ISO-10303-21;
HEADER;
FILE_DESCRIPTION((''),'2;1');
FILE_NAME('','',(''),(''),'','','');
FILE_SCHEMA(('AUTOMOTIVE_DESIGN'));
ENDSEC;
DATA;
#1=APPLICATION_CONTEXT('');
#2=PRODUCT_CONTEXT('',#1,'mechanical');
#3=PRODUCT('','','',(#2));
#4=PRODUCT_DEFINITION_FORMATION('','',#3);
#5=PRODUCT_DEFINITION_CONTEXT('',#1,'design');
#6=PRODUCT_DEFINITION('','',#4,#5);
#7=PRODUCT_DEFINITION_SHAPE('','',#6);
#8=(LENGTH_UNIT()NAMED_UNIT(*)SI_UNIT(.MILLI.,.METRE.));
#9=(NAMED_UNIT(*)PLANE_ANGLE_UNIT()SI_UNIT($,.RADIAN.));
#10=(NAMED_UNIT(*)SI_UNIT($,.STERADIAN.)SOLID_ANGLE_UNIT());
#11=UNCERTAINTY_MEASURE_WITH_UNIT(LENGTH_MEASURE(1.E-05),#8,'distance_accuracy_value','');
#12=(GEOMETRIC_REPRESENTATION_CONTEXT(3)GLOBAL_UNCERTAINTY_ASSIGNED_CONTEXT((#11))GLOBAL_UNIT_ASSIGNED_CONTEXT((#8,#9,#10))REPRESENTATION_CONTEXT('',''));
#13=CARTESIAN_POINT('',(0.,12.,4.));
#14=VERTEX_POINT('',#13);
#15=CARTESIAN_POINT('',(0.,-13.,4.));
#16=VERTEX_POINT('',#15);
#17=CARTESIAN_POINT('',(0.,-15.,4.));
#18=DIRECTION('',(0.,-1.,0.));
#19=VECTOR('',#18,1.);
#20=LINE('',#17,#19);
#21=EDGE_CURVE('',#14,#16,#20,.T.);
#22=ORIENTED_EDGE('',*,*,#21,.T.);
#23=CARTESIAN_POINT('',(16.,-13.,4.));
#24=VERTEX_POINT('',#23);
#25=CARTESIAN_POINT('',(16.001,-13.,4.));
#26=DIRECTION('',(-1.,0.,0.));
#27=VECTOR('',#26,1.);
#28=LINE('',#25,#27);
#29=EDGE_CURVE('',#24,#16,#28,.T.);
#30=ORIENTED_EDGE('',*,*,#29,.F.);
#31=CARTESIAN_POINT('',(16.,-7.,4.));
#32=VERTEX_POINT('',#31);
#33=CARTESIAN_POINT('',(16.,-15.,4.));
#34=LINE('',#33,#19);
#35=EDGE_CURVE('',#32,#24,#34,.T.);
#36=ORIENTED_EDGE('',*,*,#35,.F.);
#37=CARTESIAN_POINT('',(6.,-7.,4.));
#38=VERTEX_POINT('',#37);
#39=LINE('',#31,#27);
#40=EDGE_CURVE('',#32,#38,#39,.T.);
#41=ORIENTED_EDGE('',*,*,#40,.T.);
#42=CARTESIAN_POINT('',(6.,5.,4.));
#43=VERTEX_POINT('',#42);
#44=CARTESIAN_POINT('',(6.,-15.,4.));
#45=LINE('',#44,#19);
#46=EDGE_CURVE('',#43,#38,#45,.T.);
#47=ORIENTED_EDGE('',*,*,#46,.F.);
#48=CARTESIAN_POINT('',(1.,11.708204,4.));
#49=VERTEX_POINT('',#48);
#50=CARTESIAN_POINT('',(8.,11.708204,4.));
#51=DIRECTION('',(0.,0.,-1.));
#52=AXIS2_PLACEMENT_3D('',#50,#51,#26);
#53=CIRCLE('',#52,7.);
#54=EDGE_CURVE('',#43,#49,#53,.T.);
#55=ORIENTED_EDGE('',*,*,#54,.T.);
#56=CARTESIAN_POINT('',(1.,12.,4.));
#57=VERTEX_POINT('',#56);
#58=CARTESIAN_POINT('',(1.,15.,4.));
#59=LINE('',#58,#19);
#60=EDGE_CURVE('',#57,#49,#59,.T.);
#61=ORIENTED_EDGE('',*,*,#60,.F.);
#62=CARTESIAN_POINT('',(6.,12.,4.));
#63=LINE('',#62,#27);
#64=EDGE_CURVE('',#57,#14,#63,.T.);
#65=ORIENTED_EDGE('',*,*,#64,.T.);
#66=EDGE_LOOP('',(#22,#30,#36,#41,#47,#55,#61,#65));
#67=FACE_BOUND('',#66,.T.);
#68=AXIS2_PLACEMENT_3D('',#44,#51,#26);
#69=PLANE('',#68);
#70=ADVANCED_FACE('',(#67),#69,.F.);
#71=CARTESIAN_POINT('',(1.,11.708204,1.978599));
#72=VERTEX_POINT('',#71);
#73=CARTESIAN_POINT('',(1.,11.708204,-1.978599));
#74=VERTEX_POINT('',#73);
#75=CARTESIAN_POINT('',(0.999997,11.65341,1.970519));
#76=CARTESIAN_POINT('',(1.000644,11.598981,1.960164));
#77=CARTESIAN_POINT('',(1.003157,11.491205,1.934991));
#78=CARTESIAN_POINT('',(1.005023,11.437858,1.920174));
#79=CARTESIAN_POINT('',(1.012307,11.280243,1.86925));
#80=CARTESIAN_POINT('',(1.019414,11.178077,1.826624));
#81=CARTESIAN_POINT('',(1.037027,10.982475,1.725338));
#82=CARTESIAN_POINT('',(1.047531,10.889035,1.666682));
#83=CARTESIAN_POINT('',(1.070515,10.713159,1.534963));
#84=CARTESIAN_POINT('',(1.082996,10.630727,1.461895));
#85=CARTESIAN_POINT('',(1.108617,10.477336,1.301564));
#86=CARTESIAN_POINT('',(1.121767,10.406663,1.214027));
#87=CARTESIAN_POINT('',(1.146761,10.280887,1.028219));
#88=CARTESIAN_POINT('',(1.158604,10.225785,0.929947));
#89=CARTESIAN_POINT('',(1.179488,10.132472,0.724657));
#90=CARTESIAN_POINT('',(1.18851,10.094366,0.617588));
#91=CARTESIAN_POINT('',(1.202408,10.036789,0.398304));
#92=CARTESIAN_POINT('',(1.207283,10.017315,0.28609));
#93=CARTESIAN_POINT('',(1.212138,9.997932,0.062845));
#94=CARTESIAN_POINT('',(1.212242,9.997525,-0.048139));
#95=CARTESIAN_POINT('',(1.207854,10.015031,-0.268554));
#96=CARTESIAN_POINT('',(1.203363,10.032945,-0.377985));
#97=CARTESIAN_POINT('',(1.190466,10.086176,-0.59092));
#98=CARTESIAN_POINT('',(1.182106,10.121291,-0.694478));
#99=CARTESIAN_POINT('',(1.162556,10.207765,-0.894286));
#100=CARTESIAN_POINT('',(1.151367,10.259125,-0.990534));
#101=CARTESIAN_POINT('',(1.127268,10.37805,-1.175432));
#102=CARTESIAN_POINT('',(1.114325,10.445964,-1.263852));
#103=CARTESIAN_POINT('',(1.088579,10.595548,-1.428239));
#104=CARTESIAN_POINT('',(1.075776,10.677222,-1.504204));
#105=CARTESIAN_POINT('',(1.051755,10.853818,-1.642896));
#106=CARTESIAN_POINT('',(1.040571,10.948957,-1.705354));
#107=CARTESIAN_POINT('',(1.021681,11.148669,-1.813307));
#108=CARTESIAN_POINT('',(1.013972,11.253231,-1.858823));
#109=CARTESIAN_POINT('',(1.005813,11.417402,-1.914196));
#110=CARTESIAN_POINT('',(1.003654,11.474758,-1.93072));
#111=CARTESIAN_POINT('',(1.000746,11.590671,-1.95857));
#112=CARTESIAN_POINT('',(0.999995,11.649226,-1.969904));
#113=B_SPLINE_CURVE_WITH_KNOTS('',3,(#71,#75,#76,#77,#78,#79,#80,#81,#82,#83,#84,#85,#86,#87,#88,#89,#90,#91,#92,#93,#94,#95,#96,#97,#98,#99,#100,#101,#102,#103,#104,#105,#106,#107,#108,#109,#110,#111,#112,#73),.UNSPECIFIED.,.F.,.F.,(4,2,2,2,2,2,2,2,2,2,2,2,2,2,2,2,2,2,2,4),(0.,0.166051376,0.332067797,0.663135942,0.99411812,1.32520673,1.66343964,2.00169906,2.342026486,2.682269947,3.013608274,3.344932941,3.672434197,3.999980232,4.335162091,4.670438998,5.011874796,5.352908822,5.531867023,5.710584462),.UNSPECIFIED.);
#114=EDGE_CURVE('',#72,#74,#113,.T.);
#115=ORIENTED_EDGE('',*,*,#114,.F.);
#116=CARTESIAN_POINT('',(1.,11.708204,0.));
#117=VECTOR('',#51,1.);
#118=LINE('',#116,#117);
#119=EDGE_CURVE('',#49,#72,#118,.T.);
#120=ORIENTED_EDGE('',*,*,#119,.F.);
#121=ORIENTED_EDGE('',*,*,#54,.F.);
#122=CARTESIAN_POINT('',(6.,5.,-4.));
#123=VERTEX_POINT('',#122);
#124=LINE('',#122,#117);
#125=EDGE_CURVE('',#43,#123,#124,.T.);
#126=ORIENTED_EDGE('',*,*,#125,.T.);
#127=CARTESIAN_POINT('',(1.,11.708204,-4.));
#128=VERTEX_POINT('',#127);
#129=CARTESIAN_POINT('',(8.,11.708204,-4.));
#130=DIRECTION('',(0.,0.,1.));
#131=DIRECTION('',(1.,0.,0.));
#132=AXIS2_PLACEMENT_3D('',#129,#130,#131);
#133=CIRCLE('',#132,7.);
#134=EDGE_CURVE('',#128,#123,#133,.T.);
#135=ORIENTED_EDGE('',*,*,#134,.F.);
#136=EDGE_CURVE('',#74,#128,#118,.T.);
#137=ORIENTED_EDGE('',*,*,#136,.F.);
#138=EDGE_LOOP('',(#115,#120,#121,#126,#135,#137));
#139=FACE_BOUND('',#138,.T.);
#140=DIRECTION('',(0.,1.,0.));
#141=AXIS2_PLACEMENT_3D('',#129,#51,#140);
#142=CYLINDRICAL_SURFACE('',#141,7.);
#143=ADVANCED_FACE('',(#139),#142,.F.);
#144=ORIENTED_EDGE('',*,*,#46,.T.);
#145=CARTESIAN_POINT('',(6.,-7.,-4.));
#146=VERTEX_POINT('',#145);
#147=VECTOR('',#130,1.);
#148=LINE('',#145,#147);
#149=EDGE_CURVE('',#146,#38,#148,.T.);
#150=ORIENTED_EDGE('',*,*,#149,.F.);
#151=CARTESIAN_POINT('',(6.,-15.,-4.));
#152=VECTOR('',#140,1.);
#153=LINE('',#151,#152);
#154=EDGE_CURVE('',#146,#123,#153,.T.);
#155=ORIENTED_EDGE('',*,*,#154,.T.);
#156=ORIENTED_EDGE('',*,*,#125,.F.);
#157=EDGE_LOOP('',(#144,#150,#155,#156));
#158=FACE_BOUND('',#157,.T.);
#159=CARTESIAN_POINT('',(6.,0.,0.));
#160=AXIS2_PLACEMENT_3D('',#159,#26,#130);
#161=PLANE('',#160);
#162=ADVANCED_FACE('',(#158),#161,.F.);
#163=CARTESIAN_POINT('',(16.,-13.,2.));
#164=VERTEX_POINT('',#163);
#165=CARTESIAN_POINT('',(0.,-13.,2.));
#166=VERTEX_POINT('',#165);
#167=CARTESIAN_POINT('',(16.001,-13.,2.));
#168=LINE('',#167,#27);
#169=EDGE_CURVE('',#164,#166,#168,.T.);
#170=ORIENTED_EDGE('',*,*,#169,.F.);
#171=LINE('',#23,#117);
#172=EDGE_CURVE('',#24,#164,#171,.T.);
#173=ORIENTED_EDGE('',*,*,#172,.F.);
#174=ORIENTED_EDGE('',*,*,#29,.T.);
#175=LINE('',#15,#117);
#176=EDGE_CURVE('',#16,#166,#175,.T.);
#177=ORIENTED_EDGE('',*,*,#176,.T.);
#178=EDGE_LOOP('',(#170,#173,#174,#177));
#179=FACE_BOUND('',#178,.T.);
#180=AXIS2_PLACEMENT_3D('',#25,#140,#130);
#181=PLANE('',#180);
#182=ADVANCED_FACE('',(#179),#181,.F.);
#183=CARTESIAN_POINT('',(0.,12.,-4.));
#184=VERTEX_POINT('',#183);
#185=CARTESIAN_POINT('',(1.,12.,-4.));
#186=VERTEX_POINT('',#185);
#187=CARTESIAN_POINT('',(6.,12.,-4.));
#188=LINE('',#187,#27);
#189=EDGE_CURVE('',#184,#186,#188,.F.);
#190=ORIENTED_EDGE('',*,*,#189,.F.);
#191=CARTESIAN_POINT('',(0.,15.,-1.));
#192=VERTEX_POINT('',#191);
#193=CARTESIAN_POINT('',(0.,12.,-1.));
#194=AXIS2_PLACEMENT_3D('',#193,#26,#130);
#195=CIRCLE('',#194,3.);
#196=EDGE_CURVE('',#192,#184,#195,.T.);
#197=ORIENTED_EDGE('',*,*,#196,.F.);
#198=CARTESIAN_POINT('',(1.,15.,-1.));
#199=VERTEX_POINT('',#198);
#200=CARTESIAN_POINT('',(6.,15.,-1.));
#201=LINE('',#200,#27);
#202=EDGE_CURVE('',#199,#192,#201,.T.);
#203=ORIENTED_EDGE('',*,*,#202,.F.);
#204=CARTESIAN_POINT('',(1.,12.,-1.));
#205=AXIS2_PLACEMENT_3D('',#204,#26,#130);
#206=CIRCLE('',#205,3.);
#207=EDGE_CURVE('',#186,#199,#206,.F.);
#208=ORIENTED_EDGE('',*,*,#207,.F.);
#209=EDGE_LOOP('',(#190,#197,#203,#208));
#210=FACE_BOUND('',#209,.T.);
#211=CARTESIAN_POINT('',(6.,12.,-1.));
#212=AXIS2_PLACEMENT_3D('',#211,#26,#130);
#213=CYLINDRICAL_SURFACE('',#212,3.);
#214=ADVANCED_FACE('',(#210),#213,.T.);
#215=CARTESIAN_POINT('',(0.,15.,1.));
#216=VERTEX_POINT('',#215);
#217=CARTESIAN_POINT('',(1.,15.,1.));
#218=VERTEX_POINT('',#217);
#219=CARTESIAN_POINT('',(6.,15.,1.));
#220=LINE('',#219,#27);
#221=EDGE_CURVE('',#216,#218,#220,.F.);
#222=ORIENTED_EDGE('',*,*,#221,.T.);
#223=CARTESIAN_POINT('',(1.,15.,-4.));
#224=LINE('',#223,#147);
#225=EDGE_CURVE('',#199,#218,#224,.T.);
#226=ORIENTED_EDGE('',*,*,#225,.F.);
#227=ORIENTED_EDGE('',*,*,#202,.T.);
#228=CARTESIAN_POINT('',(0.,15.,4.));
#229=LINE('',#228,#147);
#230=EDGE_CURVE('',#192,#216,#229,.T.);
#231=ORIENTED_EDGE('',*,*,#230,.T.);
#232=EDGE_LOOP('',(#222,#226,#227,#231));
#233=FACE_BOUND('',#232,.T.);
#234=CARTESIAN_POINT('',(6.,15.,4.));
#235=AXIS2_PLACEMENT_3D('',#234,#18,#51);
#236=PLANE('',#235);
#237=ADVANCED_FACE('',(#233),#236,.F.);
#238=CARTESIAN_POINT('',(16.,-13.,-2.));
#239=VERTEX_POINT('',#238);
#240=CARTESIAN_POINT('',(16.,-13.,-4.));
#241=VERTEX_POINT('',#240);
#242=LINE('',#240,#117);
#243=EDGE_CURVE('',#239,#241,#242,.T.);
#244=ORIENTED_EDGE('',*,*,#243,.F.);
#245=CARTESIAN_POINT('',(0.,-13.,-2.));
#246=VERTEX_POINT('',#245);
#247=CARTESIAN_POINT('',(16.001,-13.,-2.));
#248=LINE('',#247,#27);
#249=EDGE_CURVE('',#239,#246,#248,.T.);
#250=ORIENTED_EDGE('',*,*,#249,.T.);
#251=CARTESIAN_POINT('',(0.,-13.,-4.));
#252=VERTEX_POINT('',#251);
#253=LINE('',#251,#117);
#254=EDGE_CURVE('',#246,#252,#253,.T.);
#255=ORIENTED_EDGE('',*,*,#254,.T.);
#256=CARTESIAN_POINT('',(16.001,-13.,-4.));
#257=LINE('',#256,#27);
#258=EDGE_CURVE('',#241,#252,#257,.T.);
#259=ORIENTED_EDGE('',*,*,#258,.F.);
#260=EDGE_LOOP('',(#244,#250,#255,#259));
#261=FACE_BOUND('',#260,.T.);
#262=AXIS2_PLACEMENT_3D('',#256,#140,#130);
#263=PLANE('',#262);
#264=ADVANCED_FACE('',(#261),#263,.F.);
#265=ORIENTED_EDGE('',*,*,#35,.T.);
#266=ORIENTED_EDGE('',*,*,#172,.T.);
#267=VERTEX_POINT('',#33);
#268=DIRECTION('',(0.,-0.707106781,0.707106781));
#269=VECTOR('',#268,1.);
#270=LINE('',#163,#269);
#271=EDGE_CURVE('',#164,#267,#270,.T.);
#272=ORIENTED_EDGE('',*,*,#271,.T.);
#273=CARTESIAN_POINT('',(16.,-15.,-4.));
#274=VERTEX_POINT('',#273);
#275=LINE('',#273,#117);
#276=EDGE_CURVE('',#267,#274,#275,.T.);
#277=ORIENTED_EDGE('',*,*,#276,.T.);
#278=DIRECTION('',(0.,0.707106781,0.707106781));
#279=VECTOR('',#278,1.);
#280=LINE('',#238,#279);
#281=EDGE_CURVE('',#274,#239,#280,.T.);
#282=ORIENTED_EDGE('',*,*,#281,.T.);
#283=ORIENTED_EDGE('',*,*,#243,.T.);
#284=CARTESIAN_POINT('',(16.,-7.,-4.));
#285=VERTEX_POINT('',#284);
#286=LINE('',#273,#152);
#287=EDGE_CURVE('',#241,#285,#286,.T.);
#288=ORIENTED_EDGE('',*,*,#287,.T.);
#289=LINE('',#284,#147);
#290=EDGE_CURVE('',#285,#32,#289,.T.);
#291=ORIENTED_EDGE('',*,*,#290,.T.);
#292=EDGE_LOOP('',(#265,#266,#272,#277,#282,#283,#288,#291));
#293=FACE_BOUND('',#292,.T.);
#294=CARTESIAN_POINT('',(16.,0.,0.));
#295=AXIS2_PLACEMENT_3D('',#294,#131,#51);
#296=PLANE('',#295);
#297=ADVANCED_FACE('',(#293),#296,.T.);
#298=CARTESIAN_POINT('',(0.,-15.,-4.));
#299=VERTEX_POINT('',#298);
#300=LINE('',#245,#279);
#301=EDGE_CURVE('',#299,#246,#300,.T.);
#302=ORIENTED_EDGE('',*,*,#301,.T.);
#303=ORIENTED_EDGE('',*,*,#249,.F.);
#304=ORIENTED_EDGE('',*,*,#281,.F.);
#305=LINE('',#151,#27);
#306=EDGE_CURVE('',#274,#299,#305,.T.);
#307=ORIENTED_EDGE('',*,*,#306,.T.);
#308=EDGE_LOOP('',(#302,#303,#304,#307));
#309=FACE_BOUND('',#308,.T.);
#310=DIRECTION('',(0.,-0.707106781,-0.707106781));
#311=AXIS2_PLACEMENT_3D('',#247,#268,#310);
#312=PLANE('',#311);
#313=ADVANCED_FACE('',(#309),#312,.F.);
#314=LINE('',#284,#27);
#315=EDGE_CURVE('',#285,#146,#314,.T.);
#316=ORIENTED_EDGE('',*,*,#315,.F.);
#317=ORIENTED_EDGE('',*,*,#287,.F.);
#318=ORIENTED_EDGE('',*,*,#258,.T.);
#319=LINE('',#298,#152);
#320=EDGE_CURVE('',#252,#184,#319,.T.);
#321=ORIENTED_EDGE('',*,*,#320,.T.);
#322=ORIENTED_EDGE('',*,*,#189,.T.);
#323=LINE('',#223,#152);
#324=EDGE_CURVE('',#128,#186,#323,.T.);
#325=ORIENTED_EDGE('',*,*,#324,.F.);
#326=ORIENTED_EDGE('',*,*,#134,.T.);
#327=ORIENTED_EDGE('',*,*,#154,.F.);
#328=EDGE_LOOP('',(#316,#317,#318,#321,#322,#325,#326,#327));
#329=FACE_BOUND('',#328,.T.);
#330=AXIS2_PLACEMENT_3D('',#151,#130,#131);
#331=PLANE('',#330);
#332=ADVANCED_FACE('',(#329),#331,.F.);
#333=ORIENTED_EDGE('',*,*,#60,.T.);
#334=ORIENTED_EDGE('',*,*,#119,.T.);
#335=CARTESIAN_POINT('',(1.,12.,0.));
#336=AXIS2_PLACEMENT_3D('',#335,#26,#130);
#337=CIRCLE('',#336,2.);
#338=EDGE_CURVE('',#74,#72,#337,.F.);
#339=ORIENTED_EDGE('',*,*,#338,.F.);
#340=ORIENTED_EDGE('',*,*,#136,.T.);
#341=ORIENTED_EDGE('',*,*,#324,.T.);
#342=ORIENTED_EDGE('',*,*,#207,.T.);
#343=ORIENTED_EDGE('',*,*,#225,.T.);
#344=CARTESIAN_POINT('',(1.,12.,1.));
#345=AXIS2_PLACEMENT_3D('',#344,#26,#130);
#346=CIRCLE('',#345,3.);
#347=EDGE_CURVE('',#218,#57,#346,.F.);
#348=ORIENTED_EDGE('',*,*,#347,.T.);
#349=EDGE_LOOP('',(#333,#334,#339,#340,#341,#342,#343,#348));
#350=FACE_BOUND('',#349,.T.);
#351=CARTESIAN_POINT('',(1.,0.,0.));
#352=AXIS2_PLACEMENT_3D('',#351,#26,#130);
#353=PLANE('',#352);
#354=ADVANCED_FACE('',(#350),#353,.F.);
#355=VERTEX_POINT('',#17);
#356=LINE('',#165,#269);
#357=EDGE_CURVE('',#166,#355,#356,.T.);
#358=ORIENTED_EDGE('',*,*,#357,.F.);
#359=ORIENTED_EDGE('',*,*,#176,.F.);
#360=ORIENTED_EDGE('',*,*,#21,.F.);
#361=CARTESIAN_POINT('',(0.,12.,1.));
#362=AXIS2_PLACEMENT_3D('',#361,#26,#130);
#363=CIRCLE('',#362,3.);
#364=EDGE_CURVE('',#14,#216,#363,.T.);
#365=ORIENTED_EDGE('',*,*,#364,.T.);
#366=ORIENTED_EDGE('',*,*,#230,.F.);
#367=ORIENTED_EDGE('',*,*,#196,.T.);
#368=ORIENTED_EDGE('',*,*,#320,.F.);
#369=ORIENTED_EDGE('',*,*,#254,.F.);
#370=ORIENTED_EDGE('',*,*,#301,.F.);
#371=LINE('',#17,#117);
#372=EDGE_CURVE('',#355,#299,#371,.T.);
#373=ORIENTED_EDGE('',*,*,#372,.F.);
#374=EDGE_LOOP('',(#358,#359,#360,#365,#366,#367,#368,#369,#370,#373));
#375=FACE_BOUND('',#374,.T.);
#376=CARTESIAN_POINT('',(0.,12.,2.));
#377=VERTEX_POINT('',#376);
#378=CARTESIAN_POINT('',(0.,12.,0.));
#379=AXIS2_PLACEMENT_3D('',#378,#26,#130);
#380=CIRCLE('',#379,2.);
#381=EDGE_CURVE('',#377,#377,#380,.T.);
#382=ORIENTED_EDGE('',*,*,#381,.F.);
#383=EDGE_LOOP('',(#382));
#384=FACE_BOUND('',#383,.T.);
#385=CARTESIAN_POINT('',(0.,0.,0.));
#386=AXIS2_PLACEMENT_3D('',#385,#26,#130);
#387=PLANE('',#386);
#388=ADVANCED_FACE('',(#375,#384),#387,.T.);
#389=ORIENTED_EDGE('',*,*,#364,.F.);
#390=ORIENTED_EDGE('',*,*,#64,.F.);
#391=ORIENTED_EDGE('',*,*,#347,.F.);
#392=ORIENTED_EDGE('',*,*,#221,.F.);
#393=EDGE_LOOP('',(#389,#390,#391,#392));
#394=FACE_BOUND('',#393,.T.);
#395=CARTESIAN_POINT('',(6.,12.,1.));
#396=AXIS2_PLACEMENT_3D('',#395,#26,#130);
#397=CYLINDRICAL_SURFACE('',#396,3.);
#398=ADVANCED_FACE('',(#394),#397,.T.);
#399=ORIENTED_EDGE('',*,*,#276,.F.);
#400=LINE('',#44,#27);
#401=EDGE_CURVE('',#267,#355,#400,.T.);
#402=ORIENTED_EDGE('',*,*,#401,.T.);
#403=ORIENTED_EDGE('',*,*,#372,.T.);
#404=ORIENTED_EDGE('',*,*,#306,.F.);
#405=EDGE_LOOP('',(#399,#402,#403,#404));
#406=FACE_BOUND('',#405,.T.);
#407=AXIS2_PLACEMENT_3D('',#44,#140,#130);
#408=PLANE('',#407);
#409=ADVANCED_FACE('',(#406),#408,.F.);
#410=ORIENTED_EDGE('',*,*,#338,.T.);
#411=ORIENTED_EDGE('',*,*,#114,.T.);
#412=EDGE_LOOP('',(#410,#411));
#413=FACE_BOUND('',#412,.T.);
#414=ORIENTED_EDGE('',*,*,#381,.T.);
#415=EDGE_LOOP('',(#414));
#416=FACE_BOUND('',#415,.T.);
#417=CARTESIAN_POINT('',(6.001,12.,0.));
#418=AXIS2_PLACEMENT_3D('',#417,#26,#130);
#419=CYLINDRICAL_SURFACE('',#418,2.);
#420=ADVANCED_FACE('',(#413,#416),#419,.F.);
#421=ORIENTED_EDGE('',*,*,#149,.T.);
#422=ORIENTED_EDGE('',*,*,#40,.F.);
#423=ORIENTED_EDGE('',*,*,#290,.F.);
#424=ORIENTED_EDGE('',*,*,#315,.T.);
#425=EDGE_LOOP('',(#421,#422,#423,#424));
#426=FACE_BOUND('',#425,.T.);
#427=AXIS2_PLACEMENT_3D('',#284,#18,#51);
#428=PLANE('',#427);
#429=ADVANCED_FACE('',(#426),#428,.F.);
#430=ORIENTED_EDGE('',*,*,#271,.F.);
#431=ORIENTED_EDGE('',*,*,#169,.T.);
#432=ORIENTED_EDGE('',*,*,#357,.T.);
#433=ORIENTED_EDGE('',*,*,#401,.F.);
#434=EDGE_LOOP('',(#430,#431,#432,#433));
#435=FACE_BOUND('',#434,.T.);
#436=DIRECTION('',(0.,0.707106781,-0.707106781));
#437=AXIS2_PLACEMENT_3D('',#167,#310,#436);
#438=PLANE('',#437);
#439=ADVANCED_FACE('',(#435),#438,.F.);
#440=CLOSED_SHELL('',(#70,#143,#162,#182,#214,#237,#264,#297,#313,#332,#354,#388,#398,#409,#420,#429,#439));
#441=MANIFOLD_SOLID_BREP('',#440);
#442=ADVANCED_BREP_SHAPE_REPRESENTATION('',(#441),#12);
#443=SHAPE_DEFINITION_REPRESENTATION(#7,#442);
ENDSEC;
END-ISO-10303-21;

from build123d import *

# Parameters (mm, degrees)
SKETCH1_W           = 8
SKETCH1_H           = 30
BOSS_EXTRUDE1_DEPTH = 6
SKETCH2_W           = 8
SKETCH2_H           = 10
CUT_EXTRUDE1_DEPTH  = 5
CUT_EXTRUDE2_REACH  = 18.643
SKETCH3_R           = 2
FILLET1_R           = 3
FILLET2_R           = 7
SKETCH4_W           = 8
SKETCH4_H           = 8
BOSS_EXTRUDE2_DEPTH = 10
CUT_EXTRUDE4_REACH  = 24.293


with BuildPart() as part:
    # Sketch1 → Boss-Extrude1 (new body)
    with BuildSketch(Plane(origin=(0, 0, 0), x_dir=(0, 0, -1), z_dir=(1, 0, 0))):
        Rectangle(SKETCH1_W, SKETCH1_H)
    extrude(amount=BOSS_EXTRUDE1_DEPTH)

    # Sketch2 → Cut-Extrude1 (cut)
    with BuildSketch(Plane(origin=(6, 0, 0), x_dir=(0, 0, -1), z_dir=(1, 0, 0))):
        with Locations((0, 10)):
            Rectangle(SKETCH2_W, SKETCH2_H)
    extrude(amount=-CUT_EXTRUDE1_DEPTH, mode=Mode.SUBTRACT)

    # Sketch3 → Cut-Extrude2 (cut, up to next)
    with BuildSketch(Plane.ZY, mode=Mode.PRIVATE) as cut_extrude2_sk1:
        with Locations((0, 12)):
            Circle(SKETCH3_R)
    cut_extrude2_tool1 = extrude(cut_extrude2_sk1.sketch, amount=-CUT_EXTRUDE2_REACH, mode=Mode.PRIVATE) & part.part
    add(cut_extrude2_tool1.solids().sort_by_distance((0, 12, 0))[0], mode=Mode.SUBTRACT)

    # Fillet1
    fillet1_edges = [part.edges().sort_by_distance(p)[0] for p in [
        (0.5, 15, 4),
        (0.5, 15, -4),
    ]]
    fillet(fillet1_edges, radius=FILLET1_R)

    # Fillet2
    # the kernel refuses this fillet: 7 mm, written as the material it adds along each edge
    with BuildSketch(Plane(origin=(1, 5, 4), x_dir=(0, 1, 0), z_dir=(0, 0, -1))) as fillet2_piece_1_section:
        with BuildLine():
            CenterArc((6.708203932, 7), FILLET2_R, 196.601549599, 73.398450401)
            Line((0, 5), (0, 0))
            Line((0, 0), (6.708203932, 0))
        make_face()
    fillet2_piece_1 = extrude(amount=8, mode=Mode.PRIVATE)
    fillet2_piece_1 = fillet2_piece_1 - Plane(origin=(1, 12, 0), x_dir=(0, 0, 1), z_dir=(-1, 0, 0)) * Cylinder(2, 43, mode=Mode.PRIVATE)
    add(fillet2_piece_1)

    # Sketch4 → Boss-Extrude2 (add)
    with BuildSketch(Plane(origin=(6, 0, 0), x_dir=(0, 0, -1), z_dir=(1, 0, 0))):
        with Locations((0, -11)):
            Rectangle(SKETCH4_W, SKETCH4_H)
    extrude(amount=BOSS_EXTRUDE2_DEPTH)

    # Sketch6 → Cut-Extrude4 (cut, up to next)
    with BuildSketch(Plane.ZY, mode=Mode.PRIVATE) as cut_extrude4_sk1:
        Polygon((4, -15), (4, -13), (2, -13), align=None)
    cut_extrude4_tool1 = extrude(cut_extrude4_sk1.sketch, amount=-CUT_EXTRUDE4_REACH, mode=Mode.PRIVATE) & part.part
    # Sketch6 → Cut-Extrude4 (cut, up to next)
    with BuildSketch(Plane.ZY, mode=Mode.PRIVATE) as cut_extrude4_sk2:
        Polygon((-4, -15), (-4, -13), (-2, -13), align=None)
    cut_extrude4_tool2 = extrude(cut_extrude4_sk2.sketch, amount=-CUT_EXTRUDE4_REACH, mode=Mode.PRIVATE) & part.part
    add(cut_extrude4_tool1.solids().sort_by_distance((0, -13.666667, 3.333333))[0], mode=Mode.SUBTRACT)
    add(cut_extrude4_tool2.solids().sort_by_distance((0, -13.666667, -3.333333))[0], mode=Mode.SUBTRACT)


solid = part.part
